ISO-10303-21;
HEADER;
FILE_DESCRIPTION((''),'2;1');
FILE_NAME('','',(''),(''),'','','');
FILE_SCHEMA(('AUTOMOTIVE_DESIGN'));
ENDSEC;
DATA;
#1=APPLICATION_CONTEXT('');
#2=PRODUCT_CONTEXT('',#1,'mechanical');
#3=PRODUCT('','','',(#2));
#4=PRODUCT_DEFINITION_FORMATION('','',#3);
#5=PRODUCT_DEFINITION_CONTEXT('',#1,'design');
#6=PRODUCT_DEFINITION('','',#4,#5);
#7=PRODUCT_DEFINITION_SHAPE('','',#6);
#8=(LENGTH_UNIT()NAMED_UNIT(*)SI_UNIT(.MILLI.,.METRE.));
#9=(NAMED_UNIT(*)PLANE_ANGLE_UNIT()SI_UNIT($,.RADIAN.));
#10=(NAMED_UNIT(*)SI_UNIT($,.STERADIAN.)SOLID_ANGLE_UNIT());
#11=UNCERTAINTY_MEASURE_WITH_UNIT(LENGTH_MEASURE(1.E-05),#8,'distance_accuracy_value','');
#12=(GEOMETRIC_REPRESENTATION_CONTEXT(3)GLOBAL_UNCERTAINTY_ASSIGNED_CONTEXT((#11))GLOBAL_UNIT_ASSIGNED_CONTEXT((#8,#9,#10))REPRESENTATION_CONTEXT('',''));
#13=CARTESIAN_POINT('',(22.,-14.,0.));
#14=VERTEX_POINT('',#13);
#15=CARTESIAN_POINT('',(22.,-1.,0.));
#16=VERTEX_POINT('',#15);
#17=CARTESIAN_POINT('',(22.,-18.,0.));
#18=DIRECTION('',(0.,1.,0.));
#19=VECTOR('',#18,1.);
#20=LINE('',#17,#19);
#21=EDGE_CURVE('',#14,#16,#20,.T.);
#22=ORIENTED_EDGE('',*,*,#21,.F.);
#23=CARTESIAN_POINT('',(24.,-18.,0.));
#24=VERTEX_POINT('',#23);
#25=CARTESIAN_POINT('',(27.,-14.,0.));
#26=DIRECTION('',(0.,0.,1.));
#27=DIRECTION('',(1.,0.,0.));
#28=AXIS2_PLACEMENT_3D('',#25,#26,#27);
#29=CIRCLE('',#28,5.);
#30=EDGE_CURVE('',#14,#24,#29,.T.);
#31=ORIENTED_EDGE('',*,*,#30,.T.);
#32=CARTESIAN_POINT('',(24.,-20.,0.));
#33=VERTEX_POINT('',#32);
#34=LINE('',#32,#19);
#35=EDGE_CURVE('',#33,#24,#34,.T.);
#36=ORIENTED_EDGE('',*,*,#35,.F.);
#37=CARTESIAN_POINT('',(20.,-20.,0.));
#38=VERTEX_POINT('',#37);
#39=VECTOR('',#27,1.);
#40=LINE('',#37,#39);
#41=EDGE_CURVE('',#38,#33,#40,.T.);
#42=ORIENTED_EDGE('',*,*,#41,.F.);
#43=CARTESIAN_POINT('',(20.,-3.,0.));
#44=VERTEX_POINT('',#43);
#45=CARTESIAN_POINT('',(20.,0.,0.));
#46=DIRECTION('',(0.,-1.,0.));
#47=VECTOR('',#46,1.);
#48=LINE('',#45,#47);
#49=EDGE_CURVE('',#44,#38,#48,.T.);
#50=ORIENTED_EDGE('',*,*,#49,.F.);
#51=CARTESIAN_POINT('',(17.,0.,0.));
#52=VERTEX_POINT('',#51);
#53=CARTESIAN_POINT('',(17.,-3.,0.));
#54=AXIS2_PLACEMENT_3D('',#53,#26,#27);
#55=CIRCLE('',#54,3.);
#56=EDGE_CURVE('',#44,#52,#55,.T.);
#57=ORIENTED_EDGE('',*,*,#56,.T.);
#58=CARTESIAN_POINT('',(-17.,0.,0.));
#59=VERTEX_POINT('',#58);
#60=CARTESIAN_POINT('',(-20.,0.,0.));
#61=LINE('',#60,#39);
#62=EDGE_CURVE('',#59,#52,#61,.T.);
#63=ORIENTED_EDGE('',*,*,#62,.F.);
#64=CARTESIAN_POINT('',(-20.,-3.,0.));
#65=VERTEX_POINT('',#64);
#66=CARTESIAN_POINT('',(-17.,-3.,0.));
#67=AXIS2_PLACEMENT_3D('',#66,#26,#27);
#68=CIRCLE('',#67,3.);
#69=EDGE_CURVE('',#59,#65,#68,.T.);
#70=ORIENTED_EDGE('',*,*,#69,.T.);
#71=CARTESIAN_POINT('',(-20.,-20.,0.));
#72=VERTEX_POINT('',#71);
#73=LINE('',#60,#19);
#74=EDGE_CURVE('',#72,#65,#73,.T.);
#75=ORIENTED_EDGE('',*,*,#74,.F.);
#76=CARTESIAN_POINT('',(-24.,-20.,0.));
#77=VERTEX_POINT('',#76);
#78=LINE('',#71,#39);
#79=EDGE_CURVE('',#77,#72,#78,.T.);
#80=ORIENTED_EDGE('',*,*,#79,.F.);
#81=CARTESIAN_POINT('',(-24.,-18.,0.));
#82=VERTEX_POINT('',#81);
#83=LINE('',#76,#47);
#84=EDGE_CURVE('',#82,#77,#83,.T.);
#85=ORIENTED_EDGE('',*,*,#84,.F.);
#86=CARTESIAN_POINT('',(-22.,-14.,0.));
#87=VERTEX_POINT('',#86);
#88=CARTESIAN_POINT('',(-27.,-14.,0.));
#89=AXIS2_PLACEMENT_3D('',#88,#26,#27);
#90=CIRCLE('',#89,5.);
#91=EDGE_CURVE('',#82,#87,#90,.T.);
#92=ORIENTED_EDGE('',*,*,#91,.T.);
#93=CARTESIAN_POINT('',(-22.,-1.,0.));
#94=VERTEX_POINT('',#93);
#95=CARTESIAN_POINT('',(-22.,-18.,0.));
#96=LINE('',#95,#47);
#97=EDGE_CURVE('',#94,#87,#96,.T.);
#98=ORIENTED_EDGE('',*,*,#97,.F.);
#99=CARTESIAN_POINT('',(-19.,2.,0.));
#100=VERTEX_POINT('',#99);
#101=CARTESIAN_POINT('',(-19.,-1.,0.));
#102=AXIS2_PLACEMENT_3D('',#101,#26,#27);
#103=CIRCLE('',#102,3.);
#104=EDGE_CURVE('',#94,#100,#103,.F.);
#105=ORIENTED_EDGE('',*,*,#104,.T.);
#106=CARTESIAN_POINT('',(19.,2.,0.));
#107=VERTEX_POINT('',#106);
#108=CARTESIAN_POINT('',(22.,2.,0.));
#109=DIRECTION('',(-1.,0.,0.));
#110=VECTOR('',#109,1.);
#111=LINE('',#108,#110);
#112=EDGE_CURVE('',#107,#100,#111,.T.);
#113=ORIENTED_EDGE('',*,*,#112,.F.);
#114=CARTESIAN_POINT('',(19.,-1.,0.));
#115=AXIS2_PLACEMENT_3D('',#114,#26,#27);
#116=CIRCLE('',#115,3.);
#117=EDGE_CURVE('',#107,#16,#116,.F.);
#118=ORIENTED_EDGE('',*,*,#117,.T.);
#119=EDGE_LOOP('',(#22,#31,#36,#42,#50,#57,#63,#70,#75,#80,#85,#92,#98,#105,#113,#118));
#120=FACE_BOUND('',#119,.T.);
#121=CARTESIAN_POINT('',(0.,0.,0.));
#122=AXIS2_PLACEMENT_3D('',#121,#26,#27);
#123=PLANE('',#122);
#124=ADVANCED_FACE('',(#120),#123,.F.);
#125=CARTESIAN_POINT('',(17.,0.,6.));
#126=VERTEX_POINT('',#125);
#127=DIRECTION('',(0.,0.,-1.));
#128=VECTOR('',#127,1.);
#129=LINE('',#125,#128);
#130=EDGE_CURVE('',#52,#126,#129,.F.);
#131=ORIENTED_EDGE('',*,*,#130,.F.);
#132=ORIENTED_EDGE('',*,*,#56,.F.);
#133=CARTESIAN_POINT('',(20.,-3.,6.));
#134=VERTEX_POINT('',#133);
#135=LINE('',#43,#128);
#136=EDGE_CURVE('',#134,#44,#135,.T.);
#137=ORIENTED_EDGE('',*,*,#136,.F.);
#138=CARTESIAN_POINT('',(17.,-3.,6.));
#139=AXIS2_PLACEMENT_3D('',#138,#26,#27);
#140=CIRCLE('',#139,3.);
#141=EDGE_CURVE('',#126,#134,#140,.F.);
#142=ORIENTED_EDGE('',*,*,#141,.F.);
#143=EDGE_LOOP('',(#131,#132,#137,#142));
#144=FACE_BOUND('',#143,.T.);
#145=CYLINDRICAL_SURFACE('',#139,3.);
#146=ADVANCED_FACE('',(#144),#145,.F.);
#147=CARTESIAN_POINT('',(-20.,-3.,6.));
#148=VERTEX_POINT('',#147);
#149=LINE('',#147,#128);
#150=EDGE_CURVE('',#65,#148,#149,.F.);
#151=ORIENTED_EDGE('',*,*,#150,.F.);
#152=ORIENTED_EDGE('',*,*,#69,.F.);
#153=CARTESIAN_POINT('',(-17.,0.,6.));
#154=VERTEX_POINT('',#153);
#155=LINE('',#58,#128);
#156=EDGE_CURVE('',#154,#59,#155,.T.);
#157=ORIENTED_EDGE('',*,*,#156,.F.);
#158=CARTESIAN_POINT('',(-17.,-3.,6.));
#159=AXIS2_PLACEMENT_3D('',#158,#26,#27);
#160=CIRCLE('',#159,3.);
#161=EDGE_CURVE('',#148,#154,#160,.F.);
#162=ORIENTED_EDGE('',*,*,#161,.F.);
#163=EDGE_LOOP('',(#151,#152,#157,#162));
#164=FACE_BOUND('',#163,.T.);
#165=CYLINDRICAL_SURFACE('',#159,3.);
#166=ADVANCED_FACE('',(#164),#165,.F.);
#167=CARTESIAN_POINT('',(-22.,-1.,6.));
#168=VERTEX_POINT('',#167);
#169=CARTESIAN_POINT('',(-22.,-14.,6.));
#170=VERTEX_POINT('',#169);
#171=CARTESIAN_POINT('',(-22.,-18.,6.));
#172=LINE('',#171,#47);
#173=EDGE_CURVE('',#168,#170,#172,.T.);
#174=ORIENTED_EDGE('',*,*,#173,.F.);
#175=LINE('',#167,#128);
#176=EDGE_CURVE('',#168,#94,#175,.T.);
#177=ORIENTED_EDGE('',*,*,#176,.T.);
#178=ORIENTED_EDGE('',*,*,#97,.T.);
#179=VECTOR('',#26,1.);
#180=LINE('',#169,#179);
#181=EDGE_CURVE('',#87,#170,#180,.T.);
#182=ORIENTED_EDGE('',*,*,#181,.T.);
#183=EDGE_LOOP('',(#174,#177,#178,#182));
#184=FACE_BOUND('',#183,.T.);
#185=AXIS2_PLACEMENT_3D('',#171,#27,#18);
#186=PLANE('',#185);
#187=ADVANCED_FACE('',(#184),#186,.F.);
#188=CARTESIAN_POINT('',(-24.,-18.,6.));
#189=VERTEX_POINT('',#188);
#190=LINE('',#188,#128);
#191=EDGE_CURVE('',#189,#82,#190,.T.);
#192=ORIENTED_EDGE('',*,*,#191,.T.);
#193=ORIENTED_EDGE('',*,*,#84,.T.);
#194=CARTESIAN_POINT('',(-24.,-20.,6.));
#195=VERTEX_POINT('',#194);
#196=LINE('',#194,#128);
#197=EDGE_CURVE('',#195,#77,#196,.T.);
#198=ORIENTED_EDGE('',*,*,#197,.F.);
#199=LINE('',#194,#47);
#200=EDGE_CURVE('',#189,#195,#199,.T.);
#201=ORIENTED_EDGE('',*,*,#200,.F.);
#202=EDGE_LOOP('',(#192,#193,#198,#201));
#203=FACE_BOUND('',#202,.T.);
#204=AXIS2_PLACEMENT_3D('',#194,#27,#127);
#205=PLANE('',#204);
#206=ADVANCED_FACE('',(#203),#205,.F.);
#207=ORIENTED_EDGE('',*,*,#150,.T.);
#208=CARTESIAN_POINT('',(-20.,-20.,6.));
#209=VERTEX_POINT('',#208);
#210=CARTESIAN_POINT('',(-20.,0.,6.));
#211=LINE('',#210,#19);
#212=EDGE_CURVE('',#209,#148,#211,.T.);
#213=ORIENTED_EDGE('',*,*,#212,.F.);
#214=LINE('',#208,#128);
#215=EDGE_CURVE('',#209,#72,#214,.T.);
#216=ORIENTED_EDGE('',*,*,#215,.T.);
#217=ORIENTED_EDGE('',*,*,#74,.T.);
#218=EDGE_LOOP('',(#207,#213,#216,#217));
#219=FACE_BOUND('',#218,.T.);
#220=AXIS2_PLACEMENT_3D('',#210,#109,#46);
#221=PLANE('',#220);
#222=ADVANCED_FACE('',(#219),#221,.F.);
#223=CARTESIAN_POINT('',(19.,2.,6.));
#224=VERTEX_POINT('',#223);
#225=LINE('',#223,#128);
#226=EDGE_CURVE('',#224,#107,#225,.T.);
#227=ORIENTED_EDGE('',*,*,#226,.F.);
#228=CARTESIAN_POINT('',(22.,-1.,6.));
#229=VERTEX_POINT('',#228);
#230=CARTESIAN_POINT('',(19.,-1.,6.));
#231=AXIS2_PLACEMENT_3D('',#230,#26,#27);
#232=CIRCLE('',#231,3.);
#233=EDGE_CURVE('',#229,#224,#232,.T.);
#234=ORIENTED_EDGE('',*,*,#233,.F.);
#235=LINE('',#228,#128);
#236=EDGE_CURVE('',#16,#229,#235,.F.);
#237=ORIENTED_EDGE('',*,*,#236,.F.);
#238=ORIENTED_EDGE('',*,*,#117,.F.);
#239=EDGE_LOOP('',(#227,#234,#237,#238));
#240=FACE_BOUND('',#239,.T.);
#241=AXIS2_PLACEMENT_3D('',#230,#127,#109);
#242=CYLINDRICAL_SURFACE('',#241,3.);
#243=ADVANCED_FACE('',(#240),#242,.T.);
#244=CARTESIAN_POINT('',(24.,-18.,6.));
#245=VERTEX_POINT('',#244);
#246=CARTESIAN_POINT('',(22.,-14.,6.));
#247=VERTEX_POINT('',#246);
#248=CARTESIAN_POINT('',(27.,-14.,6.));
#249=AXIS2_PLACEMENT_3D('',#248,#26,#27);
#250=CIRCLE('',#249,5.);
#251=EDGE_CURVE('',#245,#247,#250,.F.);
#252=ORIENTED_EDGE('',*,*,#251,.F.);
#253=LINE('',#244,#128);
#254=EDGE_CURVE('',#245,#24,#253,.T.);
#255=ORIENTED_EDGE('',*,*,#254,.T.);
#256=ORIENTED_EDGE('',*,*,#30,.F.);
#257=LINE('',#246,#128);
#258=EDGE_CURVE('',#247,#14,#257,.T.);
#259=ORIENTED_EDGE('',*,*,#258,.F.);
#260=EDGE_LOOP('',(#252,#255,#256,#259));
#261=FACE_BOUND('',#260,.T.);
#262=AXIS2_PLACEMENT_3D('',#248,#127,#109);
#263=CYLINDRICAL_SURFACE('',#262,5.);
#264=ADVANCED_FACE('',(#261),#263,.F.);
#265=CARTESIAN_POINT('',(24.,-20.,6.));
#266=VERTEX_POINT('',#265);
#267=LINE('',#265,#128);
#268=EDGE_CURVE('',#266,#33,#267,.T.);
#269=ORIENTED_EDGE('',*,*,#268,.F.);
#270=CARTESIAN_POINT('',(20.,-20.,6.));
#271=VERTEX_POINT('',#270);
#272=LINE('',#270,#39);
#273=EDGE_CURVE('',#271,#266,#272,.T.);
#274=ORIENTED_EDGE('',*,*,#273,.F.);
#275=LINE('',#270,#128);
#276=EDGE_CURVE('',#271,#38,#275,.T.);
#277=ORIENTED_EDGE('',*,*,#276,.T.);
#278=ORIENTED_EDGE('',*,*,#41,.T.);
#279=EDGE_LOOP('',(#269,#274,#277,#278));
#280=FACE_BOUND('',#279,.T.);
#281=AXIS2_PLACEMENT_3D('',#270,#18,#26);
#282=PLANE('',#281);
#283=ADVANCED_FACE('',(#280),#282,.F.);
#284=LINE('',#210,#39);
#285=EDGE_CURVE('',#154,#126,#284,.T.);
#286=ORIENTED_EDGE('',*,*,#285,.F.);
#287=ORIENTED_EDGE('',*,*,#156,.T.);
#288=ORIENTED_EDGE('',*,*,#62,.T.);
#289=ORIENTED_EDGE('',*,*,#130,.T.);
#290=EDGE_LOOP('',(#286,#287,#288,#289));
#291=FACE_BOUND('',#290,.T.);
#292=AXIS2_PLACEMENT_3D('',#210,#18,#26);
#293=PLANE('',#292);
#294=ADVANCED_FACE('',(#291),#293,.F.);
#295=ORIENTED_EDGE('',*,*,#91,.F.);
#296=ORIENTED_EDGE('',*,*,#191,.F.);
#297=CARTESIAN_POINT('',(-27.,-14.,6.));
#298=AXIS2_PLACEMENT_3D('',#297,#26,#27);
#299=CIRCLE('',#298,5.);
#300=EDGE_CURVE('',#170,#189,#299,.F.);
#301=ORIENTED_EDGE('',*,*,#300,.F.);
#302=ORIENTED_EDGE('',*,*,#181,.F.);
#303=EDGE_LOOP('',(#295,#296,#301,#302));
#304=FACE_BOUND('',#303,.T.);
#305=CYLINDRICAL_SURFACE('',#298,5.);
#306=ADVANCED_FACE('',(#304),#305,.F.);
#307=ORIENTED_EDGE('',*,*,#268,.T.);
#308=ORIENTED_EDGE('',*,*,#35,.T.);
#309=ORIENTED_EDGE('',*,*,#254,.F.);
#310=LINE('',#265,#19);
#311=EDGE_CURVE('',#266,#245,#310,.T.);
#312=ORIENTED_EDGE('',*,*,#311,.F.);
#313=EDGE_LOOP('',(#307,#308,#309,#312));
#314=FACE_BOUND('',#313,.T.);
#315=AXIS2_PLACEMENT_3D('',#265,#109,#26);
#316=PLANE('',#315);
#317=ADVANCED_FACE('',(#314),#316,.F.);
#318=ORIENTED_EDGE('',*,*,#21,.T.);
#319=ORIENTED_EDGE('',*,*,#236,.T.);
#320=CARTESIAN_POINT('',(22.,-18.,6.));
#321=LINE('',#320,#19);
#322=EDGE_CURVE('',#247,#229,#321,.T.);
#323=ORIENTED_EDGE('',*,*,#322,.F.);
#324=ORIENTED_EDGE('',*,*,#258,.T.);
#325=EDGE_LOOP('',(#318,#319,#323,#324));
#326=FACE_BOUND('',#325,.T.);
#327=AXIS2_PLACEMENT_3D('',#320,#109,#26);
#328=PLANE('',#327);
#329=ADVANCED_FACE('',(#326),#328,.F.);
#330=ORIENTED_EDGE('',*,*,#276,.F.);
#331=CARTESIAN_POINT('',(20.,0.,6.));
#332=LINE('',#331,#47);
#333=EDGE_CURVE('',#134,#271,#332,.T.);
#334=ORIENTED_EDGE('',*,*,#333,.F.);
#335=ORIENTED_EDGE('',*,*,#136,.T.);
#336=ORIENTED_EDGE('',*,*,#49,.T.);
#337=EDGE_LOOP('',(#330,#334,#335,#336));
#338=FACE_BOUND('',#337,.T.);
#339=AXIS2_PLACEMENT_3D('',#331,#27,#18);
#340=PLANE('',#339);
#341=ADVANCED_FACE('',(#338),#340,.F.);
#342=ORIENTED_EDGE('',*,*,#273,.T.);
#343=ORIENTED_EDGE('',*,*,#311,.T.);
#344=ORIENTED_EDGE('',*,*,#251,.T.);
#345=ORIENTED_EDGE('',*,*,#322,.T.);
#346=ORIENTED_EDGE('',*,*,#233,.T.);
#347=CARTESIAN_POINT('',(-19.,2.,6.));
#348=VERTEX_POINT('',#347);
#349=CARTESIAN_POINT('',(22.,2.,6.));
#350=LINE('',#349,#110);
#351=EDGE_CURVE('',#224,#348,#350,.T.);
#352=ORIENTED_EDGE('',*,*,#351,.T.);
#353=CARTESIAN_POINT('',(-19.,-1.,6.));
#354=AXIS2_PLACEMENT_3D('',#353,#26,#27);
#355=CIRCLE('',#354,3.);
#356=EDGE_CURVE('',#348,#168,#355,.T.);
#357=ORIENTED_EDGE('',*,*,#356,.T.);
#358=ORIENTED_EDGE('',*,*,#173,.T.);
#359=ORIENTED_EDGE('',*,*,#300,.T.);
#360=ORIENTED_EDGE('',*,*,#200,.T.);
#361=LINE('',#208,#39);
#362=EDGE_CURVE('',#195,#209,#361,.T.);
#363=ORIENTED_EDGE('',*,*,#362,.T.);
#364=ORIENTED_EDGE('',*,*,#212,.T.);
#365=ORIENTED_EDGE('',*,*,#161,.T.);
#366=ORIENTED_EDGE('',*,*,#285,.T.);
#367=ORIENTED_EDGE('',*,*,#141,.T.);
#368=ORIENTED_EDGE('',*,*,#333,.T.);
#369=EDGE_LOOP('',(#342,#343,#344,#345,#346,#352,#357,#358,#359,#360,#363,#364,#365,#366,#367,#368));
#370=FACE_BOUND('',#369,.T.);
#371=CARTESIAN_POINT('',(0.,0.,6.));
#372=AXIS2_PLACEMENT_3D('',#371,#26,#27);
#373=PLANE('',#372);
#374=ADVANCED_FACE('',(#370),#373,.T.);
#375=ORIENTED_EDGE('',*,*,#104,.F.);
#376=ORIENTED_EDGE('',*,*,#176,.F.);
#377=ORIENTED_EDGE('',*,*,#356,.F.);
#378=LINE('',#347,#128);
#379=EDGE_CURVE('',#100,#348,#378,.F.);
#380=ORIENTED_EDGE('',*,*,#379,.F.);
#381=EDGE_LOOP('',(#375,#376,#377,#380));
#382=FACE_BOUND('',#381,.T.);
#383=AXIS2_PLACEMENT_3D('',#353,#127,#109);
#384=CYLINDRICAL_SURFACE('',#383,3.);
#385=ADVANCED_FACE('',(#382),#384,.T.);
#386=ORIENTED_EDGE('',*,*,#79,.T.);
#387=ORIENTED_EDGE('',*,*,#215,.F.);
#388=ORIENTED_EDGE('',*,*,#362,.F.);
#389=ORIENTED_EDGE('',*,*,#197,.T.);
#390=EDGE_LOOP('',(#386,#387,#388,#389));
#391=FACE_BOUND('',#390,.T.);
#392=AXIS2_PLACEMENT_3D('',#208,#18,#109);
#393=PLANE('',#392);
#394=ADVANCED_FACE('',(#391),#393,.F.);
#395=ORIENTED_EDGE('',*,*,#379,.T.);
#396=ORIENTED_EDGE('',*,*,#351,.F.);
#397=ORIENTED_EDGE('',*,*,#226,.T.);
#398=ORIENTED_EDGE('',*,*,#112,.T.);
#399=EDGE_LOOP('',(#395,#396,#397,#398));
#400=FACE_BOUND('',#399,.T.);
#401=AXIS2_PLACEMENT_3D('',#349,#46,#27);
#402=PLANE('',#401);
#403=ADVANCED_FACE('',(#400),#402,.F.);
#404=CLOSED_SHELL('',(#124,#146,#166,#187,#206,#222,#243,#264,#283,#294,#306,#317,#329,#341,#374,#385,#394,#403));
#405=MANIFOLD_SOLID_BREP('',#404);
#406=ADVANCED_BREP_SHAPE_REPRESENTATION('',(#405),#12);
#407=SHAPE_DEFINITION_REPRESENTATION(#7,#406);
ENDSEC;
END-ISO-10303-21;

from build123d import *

# Parameters (mm, degrees)
EXTRUDE_1_DEPTH = 6
FILLET_1_R      = 5
FILLET_2_R      = 3


with BuildPart() as part:
    # 草图1 → 凸台-拉伸1 (new body)
    with BuildSketch(Plane.XY):
        Polygon((-20, 0), (20, 0), (20, -20), (24, -20), (24, -18), (22, -18), (22, 2), (-22, 2), (-22, -18), (-24, -18), (-24, -20), (-20, -20), align=None)
    extrude(amount=EXTRUDE_1_DEPTH)

    # 圆角1
    # the kernel refuses this fillet: 5 mm, written as the material it adds along each edge
    with BuildSketch(Plane(origin=(22, -18, 0), x_dir=(1, 0, 0), z_dir=(0, 0, 1))) as fillet_1_piece_1:
        with BuildLine():
            CenterArc((5, 4), FILLET_1_R, 180, 53.130102354)
            Line((0, 4), (-0.1, 4))
            Line((-0.1, 4), (-0.1, 0))
            Line((-0.1, 0), (0, -0.1))
            ThreePointArc((0, -0.1), (1, -0.1), (1.94, -0.08))
            Line((1.94, -0.08), (2, 0))
        make_face()
    extrude(amount=6)
    with BuildSketch(Plane(origin=(-22, -18, 0), x_dir=(0, 1, 0), z_dir=(0, 0, 1))) as fillet_1_piece_2:
        with BuildLine():
            CenterArc((4, 5), FILLET_1_R, 216.869897646, 53.130102354)
            Line((0, 2), (-0.08, 1.94))
            ThreePointArc((-0.08, 1.94), (-0.1, 1), (-0.1, 0))
            Line((-0.1, 0), (0, -0.1))
            Line((0, -0.1), (4, -0.1))
            Line((4, -0.1), (4, 0))
        make_face()
    extrude(amount=6)

    # 圆角2
    fillet_2_edges = [part.edges().sort_by_distance(p)[0] for p in [
        (20, 0, 3),
        (-20, 0, 3),
        (-22, 2, 3),
        (22, 2, 3),
    ]]
    fillet(fillet_2_edges, radius=FILLET_2_R)


solid = part.part
